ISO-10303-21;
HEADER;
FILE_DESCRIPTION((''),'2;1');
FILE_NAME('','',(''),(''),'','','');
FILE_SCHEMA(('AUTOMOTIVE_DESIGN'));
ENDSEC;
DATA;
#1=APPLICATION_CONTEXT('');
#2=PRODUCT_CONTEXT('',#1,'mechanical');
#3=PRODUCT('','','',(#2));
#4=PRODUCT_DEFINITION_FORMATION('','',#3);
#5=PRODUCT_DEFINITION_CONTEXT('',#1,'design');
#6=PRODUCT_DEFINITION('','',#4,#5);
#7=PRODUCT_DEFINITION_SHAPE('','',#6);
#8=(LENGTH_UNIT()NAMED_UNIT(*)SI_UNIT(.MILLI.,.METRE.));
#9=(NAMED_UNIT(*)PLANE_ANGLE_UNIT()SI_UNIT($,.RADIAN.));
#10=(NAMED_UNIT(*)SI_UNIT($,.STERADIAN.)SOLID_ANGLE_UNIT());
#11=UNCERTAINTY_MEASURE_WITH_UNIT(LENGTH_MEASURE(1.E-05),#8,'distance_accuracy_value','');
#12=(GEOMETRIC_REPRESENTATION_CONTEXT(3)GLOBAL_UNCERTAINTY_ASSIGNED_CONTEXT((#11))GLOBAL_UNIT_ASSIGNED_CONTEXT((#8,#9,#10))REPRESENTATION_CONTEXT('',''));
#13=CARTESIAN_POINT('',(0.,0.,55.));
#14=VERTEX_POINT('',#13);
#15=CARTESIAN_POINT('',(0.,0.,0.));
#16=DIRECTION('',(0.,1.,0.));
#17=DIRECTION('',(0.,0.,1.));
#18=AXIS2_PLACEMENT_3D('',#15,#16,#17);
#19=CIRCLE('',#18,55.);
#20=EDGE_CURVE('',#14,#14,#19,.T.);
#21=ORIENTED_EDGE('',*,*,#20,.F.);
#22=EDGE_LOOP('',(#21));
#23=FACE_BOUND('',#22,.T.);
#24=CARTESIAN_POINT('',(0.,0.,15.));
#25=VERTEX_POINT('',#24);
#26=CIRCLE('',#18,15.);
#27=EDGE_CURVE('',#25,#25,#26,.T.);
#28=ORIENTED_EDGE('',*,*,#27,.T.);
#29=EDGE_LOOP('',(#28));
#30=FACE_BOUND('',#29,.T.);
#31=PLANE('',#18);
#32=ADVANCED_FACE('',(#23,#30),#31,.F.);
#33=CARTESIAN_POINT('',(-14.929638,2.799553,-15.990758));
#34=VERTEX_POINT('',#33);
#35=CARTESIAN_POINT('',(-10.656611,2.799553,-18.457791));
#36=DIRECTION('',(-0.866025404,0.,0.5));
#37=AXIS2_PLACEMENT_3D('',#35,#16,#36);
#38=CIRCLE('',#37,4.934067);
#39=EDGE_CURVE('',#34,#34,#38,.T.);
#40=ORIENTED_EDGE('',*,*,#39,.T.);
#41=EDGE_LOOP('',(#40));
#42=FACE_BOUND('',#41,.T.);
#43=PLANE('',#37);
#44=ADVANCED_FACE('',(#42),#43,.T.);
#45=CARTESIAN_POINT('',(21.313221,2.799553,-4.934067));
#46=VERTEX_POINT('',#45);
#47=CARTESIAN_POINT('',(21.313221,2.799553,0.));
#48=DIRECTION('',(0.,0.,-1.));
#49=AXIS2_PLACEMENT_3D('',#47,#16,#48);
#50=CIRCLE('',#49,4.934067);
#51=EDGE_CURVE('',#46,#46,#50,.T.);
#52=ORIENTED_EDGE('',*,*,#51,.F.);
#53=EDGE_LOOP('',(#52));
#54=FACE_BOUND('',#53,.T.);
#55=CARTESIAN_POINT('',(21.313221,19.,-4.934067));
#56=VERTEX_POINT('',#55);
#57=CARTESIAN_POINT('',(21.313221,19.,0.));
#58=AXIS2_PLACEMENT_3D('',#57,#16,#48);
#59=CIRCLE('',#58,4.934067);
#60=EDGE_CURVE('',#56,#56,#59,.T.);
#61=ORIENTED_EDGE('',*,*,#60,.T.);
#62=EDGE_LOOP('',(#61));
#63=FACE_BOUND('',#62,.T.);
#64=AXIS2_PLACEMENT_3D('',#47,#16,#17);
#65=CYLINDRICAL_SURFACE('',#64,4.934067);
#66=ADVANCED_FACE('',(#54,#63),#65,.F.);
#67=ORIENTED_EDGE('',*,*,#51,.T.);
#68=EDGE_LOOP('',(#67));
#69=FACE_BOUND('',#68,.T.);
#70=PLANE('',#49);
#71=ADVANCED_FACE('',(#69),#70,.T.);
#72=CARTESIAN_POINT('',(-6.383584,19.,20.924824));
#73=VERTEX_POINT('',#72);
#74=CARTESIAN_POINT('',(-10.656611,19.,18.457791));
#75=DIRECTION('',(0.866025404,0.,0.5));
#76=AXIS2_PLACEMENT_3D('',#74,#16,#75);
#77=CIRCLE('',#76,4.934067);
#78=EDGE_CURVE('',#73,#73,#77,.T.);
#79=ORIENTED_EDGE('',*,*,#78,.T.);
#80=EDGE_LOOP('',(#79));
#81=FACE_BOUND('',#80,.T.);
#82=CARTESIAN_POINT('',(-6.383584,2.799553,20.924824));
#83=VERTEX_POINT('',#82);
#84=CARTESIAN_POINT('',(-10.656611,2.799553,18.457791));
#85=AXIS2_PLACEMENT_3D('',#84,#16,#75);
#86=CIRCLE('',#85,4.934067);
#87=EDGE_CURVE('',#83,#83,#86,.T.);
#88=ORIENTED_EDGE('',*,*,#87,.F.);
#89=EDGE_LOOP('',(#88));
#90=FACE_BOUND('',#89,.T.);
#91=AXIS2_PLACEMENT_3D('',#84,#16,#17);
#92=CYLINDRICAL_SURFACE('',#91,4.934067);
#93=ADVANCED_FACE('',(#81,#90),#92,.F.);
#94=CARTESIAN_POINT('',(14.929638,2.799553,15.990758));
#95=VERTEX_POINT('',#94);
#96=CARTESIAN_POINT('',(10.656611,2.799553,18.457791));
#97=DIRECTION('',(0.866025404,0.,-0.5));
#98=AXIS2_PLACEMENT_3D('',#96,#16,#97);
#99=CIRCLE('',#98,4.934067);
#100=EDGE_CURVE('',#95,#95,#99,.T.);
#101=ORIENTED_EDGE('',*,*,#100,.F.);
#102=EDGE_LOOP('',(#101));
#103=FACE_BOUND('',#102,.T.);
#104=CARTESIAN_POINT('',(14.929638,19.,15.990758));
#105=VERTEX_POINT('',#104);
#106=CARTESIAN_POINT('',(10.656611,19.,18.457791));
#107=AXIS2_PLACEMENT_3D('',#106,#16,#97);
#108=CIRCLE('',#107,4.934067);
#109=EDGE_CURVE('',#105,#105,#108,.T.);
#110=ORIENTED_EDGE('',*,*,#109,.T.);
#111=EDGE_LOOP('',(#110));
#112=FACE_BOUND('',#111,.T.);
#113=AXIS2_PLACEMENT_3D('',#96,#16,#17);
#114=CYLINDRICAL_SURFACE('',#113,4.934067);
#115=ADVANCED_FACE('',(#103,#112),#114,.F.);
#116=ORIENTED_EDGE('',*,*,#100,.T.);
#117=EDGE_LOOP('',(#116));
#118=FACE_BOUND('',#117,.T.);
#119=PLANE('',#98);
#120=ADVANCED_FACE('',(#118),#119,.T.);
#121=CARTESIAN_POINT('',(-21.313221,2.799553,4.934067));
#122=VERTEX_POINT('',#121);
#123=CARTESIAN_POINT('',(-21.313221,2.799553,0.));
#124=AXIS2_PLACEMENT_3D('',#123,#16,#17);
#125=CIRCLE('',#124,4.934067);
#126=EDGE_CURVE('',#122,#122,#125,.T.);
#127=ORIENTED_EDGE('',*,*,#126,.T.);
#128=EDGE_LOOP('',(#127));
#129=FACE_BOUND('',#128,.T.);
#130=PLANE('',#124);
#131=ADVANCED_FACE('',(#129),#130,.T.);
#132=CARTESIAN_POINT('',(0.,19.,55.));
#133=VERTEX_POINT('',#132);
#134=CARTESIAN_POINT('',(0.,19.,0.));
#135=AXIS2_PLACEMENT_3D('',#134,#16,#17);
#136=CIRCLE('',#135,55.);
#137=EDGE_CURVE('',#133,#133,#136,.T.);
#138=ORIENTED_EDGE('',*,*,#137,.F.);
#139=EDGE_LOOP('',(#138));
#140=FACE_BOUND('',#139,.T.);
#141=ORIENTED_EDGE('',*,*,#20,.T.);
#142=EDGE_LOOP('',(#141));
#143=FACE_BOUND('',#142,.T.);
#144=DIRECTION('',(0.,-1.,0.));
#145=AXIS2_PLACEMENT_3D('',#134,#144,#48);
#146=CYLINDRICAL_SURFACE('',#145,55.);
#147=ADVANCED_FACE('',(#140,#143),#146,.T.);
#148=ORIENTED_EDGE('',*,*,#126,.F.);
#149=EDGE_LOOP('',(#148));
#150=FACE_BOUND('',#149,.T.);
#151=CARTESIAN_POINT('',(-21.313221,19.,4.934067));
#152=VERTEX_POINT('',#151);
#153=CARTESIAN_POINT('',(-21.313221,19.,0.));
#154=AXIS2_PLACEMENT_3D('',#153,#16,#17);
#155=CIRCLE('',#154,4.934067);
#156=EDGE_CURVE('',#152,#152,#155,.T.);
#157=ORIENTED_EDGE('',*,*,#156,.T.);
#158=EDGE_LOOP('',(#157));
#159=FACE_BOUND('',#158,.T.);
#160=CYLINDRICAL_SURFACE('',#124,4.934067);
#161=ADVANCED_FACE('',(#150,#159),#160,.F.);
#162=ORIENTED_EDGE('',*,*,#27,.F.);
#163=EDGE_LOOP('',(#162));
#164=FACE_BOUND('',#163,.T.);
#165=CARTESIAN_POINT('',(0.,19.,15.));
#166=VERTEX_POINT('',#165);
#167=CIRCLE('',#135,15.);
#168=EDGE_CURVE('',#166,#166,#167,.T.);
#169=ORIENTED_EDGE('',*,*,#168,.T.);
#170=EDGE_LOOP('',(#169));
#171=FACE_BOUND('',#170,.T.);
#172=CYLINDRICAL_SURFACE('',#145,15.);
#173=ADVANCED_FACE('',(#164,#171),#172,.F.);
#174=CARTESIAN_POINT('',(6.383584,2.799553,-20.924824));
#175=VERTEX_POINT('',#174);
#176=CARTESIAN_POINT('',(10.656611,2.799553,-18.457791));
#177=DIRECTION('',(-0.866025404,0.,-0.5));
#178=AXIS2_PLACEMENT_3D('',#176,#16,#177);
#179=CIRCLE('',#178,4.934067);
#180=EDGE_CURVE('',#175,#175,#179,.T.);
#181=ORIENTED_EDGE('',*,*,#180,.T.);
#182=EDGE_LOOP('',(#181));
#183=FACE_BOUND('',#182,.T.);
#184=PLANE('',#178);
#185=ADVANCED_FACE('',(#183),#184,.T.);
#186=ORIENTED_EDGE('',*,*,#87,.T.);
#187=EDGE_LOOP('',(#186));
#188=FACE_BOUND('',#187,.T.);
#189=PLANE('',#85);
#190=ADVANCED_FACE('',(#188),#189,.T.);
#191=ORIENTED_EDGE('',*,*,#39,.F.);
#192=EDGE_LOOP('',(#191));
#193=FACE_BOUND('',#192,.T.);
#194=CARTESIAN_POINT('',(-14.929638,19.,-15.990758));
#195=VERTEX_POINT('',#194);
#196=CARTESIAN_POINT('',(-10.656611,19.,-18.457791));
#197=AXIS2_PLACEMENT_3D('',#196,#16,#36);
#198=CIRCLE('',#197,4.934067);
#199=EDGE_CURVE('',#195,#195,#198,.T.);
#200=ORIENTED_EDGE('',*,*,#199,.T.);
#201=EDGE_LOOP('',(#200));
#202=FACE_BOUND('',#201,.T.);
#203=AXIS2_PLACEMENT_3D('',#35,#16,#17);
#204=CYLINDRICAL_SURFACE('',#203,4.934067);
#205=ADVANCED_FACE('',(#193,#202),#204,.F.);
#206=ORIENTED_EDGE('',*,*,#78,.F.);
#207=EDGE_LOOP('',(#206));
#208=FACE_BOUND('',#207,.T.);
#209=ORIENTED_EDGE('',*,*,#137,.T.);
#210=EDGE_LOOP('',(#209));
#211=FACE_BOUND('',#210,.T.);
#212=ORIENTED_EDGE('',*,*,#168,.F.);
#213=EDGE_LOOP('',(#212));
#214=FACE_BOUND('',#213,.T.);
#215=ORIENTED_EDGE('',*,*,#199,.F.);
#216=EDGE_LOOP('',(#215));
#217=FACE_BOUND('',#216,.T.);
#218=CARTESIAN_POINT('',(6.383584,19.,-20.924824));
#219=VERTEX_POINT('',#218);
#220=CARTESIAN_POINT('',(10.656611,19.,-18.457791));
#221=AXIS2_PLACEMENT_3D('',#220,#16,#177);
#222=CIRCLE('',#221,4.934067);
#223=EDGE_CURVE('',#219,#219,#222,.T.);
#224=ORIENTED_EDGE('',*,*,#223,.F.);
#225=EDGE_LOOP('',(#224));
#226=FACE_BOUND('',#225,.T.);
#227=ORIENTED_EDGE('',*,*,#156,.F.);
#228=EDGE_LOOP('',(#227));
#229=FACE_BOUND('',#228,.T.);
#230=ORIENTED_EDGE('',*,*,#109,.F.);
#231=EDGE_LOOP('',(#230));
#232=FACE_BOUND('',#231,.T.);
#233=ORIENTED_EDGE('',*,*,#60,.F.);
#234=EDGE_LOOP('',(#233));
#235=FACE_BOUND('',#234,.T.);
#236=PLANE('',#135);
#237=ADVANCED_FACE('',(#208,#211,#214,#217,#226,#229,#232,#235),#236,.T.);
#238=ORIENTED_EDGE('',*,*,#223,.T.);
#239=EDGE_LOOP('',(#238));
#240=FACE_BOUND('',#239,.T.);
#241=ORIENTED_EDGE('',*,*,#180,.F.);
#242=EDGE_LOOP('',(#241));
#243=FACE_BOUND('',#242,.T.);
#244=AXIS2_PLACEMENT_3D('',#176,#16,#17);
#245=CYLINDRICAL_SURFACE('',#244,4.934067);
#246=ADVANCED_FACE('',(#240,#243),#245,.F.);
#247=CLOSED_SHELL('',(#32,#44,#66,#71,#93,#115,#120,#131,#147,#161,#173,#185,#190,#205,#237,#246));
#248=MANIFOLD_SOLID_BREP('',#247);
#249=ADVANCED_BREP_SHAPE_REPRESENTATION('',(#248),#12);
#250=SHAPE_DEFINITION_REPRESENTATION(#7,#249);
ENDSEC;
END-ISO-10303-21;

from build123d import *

# Parameters (mm, degrees)
SKETCH1_R           = 55
BOSS_EXTRUDE1_DEPTH = 19
SKETCH2_R           = 15
CUT_EXTRUDE1_DEPTH  = 81.068720484
SKETCH3_R           = 4.934066531
CUT_EXTRUDE2_DEPTH  = 16.20044714
CIRPATTERN1_COUNT   = 6


with BuildPart() as part:
    # Sketch1 → Boss-Extrude1 (new body)
    with BuildSketch(Plane(origin=(0, 0, 0), x_dir=(1, 0, 0), z_dir=(0, 1, 0))):
        Circle(SKETCH1_R)
    extrude(amount=BOSS_EXTRUDE1_DEPTH)

    # Sketch2 → Cut-Extrude1 (cut, through all)
    with BuildSketch(Plane(origin=(0, 0, 0), x_dir=(1, 0, 0), z_dir=(0, 1, 0))):
        Circle(SKETCH2_R)
    extrude(amount=CUT_EXTRUDE1_DEPTH, mode=Mode.SUBTRACT)

    # Sketch3 → Cut-Extrude2 (cut)
    with BuildSketch(Plane(origin=(0, 19, 0), x_dir=(1, 0, 0), z_dir=(0, 1, 0))):
        with Locations((-21.313221427, 0)):
            Circle(SKETCH3_R)
    cut_extrude2 = extrude(amount=-CUT_EXTRUDE2_DEPTH, mode=Mode.SUBTRACT)

    # CirPattern1: Cut-Extrude2 ×6 about axis
    cirpattern1_axis = Axis((0, 0, 0), (0, 1, 0))
    for i in range(1, CIRPATTERN1_COUNT):
        add(cut_extrude2.rotate(cirpattern1_axis, i * 360 / CIRPATTERN1_COUNT), mode=Mode.SUBTRACT)


solid = part.part
